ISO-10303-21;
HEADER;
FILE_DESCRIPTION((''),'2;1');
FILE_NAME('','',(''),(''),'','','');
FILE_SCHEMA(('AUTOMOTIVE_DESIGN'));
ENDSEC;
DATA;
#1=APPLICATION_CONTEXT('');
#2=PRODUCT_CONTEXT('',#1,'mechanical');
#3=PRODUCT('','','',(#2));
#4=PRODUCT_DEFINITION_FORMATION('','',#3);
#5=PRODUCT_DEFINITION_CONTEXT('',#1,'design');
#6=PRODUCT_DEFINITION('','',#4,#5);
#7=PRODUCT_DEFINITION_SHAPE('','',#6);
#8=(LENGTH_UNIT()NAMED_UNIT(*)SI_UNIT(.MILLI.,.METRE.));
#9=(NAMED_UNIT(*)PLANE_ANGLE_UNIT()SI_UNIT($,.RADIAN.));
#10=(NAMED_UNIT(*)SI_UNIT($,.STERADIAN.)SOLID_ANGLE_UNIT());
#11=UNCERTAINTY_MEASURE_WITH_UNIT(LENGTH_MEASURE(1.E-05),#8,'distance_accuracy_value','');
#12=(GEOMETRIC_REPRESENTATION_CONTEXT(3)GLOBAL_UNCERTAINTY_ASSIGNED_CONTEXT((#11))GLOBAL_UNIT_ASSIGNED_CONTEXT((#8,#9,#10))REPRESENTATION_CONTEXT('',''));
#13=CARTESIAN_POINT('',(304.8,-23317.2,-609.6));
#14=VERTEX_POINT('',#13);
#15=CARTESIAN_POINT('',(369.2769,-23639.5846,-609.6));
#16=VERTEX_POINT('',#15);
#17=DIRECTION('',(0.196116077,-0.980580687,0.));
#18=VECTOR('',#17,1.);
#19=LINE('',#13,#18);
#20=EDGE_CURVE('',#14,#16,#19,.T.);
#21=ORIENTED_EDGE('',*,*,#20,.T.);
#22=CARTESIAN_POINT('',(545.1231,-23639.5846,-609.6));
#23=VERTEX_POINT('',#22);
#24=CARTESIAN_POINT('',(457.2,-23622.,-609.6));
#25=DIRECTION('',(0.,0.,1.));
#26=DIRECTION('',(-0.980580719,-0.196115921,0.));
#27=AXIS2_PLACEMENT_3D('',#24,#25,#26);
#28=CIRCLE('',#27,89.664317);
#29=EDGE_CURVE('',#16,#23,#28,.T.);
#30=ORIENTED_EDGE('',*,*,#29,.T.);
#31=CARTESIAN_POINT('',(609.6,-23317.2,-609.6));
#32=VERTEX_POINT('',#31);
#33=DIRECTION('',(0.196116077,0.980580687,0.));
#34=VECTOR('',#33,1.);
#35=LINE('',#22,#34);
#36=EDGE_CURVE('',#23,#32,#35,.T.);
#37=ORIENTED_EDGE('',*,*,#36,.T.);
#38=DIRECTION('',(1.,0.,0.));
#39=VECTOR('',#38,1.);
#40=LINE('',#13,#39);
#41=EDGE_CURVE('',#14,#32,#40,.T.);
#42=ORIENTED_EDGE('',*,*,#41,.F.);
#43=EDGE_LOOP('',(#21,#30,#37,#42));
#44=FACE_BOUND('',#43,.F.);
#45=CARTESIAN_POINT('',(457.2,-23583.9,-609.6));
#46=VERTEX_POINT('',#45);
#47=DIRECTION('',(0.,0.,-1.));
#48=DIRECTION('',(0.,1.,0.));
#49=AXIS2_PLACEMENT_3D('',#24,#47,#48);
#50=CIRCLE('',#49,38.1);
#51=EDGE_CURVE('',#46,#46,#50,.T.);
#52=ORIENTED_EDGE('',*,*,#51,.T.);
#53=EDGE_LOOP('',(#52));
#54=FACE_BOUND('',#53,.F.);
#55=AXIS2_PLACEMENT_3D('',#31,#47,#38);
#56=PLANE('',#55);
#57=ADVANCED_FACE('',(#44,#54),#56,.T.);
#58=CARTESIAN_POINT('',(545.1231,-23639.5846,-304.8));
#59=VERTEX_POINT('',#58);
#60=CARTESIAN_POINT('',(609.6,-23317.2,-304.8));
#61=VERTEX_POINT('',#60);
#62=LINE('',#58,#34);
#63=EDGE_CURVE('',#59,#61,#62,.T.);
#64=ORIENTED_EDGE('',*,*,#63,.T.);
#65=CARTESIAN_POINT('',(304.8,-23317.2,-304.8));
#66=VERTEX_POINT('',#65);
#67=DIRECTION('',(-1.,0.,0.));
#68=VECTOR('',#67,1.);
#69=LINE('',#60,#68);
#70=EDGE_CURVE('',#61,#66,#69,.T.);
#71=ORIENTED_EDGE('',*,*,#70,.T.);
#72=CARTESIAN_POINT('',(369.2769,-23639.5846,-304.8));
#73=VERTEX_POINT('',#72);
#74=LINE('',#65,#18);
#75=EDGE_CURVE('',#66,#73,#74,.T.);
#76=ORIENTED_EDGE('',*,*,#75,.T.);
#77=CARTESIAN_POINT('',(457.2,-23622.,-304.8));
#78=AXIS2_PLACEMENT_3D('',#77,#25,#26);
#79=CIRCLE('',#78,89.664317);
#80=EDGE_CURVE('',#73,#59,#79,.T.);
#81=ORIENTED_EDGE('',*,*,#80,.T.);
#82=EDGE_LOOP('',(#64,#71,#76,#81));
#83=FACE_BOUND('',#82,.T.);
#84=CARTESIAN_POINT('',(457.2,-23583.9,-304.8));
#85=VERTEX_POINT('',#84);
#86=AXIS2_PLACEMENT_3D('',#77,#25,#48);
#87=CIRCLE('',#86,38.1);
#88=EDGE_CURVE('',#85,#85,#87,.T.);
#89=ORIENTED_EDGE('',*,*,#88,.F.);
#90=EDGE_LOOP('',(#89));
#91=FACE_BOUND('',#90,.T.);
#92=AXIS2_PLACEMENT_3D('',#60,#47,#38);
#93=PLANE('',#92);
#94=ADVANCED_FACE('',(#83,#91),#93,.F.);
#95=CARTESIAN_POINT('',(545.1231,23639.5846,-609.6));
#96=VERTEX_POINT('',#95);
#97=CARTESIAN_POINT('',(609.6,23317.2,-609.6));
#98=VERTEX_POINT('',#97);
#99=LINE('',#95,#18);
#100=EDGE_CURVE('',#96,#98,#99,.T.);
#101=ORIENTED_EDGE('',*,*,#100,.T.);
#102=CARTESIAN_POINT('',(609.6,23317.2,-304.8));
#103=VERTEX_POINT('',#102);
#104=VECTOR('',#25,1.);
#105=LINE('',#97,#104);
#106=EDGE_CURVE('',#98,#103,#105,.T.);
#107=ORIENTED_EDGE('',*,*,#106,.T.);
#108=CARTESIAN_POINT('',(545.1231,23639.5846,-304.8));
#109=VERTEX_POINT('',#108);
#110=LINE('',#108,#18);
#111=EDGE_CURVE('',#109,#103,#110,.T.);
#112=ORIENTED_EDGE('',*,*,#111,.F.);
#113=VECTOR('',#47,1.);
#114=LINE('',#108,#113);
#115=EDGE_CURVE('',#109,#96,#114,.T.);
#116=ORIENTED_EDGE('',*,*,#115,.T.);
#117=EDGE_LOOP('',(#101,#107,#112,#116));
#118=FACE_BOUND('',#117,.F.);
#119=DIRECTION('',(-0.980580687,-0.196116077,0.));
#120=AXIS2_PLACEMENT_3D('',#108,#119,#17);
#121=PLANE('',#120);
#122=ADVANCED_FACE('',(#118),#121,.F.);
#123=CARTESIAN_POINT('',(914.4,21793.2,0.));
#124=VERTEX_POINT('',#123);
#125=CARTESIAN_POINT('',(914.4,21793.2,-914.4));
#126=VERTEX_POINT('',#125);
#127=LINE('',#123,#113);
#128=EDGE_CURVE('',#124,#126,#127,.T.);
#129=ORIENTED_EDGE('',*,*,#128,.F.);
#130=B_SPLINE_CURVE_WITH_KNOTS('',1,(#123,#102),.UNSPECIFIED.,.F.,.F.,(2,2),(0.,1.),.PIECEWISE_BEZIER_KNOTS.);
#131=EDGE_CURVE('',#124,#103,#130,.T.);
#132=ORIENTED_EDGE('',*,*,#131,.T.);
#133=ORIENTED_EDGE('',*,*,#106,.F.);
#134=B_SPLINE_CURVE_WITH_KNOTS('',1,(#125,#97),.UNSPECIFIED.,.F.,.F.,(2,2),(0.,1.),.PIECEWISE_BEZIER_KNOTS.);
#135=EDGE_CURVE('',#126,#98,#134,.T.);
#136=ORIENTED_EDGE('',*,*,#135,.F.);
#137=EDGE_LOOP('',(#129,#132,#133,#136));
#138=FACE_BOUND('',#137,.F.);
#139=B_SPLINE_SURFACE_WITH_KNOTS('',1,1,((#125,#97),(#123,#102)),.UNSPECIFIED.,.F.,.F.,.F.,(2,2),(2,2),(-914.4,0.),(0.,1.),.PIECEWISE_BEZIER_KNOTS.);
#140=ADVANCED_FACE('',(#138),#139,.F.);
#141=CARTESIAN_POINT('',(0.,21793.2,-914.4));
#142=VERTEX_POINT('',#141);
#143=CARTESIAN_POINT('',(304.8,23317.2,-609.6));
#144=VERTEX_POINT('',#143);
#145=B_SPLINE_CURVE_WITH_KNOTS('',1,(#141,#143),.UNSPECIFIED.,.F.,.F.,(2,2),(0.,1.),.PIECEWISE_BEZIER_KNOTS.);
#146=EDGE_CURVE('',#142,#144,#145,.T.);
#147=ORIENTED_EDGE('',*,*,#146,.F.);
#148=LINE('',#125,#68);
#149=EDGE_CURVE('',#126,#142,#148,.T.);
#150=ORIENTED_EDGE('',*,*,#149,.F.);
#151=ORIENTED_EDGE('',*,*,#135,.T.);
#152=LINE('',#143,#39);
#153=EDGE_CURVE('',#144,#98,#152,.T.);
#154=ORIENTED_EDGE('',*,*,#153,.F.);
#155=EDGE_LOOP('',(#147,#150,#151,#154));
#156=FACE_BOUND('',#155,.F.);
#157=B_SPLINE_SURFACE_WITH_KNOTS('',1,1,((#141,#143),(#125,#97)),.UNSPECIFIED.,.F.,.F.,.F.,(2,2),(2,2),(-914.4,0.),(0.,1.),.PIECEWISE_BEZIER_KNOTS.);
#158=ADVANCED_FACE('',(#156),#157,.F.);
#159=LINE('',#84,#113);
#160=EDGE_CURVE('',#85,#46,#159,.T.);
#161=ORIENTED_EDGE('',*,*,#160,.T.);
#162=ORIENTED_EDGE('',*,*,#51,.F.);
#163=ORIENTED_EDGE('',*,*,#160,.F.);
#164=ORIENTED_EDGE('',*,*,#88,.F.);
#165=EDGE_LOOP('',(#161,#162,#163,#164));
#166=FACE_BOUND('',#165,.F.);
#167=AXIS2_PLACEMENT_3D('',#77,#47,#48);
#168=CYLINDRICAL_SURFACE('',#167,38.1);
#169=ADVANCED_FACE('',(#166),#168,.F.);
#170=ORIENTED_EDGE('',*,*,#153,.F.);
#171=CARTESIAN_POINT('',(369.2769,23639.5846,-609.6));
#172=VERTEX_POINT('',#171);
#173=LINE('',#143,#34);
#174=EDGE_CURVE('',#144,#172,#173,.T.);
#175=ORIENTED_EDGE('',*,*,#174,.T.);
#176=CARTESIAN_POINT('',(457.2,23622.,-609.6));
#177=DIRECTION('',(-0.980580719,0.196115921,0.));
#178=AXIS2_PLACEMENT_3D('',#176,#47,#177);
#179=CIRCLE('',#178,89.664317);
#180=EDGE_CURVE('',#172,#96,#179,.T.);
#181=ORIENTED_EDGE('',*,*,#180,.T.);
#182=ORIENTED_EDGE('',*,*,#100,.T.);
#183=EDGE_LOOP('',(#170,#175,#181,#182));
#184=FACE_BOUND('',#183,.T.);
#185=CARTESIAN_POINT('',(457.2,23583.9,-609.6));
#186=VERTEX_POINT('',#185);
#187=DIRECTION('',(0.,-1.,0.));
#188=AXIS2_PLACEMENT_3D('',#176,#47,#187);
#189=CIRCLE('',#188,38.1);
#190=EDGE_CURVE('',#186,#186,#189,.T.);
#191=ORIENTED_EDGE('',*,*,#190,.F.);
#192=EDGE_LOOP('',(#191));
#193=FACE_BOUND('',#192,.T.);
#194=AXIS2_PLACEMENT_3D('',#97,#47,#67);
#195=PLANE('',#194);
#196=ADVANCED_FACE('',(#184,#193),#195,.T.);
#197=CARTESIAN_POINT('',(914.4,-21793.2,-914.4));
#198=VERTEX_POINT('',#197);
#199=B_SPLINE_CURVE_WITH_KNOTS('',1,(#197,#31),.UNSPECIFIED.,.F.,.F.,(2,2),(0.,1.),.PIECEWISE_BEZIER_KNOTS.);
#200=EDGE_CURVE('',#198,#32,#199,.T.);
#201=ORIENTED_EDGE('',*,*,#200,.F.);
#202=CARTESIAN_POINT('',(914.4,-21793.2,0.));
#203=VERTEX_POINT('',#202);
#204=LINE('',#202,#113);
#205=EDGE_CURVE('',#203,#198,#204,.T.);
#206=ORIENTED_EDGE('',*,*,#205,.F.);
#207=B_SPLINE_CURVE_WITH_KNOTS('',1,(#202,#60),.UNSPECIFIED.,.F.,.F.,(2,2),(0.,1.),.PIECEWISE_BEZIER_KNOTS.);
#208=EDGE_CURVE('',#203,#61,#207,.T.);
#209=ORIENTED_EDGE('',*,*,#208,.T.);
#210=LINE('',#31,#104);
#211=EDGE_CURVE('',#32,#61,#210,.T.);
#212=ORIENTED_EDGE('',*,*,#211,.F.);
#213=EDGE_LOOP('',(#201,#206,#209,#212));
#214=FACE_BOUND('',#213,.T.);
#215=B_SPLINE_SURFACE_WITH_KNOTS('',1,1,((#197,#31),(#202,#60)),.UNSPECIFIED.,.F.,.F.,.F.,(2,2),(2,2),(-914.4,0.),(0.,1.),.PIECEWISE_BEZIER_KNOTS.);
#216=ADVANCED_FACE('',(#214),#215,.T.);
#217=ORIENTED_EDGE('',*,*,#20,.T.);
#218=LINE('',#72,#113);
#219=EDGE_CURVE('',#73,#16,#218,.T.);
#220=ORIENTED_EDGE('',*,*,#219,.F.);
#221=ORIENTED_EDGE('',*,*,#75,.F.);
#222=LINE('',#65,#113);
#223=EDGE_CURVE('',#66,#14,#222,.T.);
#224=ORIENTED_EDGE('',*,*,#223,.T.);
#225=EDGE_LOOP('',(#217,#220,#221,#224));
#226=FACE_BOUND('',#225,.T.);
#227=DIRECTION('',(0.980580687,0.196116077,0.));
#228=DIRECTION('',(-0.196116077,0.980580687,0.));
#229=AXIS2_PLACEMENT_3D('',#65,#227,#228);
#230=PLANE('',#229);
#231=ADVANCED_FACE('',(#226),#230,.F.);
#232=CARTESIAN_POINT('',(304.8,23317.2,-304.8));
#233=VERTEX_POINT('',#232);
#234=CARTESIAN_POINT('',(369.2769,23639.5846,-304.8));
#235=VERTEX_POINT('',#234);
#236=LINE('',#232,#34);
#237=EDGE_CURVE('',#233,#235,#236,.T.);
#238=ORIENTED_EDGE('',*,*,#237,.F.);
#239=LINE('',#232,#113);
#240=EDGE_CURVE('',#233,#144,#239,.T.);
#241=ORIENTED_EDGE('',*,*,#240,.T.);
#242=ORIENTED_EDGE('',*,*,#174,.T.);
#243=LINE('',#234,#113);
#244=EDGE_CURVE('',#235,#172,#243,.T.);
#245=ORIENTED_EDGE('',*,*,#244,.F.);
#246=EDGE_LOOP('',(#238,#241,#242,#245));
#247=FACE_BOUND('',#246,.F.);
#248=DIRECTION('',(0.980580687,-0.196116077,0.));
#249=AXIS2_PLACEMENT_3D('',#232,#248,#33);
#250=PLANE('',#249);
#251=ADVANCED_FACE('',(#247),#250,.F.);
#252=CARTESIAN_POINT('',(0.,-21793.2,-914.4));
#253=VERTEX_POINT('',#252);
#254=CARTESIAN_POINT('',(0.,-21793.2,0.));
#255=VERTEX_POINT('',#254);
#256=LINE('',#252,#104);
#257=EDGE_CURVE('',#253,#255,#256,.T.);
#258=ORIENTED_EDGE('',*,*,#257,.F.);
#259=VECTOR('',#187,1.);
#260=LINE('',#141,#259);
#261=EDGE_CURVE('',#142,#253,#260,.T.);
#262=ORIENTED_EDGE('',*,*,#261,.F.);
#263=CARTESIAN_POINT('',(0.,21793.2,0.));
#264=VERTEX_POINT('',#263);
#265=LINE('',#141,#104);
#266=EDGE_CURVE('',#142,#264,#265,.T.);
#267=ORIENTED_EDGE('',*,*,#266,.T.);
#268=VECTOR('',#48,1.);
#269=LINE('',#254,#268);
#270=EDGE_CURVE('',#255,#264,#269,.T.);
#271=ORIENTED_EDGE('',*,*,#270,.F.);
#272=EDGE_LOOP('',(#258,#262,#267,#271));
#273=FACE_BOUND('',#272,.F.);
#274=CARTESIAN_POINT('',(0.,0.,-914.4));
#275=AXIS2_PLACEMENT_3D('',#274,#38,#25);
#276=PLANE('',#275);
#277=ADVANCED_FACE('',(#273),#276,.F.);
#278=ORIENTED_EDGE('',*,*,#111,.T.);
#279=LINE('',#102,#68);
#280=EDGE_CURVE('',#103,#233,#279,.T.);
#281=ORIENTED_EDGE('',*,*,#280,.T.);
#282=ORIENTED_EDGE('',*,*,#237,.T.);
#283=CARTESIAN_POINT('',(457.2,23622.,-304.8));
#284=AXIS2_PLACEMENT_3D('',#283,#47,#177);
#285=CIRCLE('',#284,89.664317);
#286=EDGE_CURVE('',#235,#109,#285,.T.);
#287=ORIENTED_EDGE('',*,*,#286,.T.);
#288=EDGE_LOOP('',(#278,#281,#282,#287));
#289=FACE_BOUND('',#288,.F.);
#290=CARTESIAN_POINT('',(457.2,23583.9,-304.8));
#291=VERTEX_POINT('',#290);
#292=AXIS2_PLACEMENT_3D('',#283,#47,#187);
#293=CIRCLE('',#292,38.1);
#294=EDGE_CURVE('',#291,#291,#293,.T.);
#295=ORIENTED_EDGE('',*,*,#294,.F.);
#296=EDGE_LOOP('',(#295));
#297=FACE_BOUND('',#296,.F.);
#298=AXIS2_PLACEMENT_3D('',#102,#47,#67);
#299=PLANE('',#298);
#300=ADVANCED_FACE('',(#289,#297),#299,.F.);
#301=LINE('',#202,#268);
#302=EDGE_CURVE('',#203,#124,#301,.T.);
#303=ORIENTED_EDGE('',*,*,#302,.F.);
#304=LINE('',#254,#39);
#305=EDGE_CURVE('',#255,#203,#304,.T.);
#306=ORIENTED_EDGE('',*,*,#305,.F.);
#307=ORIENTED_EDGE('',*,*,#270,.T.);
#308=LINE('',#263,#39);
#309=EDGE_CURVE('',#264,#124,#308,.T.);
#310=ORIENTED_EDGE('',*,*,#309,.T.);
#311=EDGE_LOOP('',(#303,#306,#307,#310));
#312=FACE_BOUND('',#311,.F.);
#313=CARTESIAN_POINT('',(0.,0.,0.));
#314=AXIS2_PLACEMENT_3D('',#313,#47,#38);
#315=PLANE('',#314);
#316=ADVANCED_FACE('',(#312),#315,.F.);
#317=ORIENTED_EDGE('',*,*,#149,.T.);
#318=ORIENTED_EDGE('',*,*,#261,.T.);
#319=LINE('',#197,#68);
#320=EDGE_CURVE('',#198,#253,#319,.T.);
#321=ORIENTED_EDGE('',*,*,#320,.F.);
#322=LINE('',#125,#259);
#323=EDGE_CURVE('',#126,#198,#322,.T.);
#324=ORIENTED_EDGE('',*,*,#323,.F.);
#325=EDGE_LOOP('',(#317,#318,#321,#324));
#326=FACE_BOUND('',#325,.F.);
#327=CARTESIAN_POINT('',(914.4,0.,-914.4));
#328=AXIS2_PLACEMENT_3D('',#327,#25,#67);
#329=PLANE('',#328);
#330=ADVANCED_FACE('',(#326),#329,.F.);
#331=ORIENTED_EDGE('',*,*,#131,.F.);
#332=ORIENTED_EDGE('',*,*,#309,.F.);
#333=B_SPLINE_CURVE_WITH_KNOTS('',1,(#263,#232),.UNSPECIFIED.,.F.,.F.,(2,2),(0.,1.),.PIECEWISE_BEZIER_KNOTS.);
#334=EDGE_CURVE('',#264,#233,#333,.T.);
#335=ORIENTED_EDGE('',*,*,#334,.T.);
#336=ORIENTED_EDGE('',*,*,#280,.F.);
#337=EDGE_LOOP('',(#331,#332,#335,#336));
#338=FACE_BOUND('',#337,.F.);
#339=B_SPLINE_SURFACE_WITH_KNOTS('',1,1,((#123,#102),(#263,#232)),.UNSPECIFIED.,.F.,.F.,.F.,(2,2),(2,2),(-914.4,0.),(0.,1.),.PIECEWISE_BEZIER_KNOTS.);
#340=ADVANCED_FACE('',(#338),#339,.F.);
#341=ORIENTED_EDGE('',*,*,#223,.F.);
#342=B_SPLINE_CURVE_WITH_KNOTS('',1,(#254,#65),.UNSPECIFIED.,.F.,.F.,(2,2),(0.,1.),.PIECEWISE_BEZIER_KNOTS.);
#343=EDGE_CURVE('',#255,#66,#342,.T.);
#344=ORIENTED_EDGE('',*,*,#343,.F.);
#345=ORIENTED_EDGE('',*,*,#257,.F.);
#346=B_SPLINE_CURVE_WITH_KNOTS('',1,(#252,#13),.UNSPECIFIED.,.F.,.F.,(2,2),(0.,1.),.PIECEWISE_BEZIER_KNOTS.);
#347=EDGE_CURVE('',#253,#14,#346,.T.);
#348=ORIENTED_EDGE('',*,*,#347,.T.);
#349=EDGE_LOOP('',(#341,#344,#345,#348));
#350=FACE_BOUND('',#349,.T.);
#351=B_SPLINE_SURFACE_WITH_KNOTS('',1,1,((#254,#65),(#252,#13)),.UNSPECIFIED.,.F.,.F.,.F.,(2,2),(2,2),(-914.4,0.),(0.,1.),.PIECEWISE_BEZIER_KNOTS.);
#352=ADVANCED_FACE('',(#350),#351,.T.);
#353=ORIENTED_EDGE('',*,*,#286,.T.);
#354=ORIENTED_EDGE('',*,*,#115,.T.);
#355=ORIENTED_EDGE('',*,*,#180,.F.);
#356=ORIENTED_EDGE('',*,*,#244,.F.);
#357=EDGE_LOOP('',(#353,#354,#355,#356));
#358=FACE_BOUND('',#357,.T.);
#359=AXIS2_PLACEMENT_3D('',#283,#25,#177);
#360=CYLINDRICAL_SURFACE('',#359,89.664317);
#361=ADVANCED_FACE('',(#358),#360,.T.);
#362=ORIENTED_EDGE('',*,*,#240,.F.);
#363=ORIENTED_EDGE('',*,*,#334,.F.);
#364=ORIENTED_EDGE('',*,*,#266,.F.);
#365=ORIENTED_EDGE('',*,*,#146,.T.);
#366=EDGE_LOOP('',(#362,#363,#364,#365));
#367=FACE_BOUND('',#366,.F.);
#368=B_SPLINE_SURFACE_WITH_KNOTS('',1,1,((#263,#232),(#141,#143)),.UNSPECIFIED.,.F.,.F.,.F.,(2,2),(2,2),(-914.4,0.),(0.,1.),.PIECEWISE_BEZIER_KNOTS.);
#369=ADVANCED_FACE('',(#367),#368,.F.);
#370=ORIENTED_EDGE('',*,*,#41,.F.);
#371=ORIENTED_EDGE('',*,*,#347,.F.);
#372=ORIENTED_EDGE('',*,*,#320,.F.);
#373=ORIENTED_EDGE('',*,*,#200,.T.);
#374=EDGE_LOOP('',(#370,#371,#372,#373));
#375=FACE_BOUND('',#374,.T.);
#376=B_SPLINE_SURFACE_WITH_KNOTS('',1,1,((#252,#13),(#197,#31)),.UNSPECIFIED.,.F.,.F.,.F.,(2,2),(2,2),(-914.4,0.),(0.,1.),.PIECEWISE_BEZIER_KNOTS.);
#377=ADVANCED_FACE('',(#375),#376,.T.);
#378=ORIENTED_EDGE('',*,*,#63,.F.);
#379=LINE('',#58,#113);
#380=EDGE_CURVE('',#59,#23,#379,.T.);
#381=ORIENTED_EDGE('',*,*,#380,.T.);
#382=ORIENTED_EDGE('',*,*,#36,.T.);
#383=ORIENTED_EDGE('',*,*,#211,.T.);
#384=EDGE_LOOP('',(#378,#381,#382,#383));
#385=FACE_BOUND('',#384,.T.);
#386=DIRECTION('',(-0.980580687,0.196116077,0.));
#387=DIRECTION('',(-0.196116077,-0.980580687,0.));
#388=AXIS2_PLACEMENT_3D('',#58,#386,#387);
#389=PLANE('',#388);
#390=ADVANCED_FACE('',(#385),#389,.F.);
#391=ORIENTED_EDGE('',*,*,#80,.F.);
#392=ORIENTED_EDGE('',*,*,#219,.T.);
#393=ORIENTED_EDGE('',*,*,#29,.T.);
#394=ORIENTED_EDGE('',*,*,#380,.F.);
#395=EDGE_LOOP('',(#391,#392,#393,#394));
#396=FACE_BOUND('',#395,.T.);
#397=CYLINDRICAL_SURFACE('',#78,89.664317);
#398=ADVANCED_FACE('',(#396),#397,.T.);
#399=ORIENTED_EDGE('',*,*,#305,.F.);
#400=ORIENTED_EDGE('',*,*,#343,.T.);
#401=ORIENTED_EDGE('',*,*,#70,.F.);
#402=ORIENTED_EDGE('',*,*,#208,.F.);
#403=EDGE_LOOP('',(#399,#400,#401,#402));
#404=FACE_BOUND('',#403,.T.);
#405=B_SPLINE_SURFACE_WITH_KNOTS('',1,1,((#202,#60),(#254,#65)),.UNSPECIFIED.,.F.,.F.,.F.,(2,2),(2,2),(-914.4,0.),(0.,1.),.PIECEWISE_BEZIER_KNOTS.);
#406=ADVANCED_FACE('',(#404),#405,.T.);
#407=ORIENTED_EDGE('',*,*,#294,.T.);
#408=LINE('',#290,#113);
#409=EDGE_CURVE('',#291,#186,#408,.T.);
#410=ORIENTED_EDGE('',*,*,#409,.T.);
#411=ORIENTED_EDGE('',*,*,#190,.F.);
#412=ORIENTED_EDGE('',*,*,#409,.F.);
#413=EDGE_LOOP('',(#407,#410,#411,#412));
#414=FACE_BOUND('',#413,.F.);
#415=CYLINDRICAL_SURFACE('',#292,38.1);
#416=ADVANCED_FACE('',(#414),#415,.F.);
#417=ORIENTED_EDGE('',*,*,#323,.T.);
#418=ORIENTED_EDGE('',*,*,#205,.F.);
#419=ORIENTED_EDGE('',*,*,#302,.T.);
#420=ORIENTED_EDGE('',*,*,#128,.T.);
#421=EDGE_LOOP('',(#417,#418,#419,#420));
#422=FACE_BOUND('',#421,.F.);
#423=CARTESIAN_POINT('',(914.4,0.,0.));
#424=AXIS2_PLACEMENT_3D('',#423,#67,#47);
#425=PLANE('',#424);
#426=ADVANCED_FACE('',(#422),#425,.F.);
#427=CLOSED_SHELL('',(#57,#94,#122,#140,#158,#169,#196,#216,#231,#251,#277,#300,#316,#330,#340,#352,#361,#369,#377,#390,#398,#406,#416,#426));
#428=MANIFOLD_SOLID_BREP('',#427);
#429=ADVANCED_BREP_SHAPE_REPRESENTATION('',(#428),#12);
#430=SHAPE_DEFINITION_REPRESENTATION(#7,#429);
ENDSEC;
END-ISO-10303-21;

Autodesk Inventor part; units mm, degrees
ref_plane "YZ Plane" through (0, 0, 0) normal (1, 0, 0) x (0, 1, 0)
sketch "Sketch5" plane through (0, 0, 0) normal (0, 1, 0) x (-1, 0, 0)
  line L0 (0, 0) -> (-914.4, 0)
  line L1 (-914.4, 0) -> (-914.4, -914.4)
  line L2 (-914.4, -914.4) -> (0, -914.4)
  line L3 (0, -914.4) -> (0, 0)
  dimension "d26" = 914.4
  dimension "d27" = 914.4
extrude "Extrusion3" add sketch "Sketch5" along normal mid plane 43586.4
ref_plane "Work Plane4" through (0, 23317.2, 0) normal (0, 1, 0) x (1, 0, 0)
sketch "Sketch6" plane through (0, 23317.2, 0) normal (0, 1, 0) x (1, 0, 0)
  line L0 (609.6, 304.8) -> (304.8, 304.8)
  line L1 (304.8, 304.8) -> (304.8, 609.6)
  line L2 (304.8, 609.6) -> (609.6, 609.6)
  line L3 (609.6, 609.6) -> (609.6, 304.8)
  line L4 (914.4, 914.4) -> (0, 914.4) projected
  line L5 (914.4, 0) -> (914.4, 914.4) projected
  point P0 (0, 0)
  dimension "d31" = 304.8
  dimension "d32" = 304.8
  dimension "d33" = 304.8
  dimension "d34" = 304.8
loft "Loft3" add profiles "Sketch6" section 1 edges at (457.2, 21793.2, 0) (914.4, 21793.2, -457.2) (457.2, 21793.2, -914.4) (0, 21793.2, -457.2)
ref_plane "Work Plane5" through (609.6, 23317.2, -304.8) normal (0, 0, -1) x (-1, 0, 0)
sketch "Sketch7" plane through (609.6, 23317.2, -304.8) normal (0, 0, -1) x (-1, 0, 0)
  line L0 (609.6, -1524) -> (304.8, 0) projected
  line L1 (0, 0) -> (304.8, 0) projected
  line L2 (-304.8, -1524) -> (0, 0) projected
  line L3 (304.8, 0) -> (0, 0) projected
  line L4 (304.8, 0) -> (240.3231, 322.3846)
  arc A0 (240.3231, 322.3846) -> (64.4769, 322.3846) centre (152.4, 304.8) ccw
  line L5 (-304.8, -1524) -> (0, 0) projected
  line L6 (64.4769, 322.3846) -> (0, 0)
  point P0 (609.6, -23317.2)
  dimension "d40" = 304.8
extrude "Extrusion4" add sketch "Sketch7" along normal up to surface (304.8 mm away)
hole "Hole1" at (457.2, 23622, -304.8) direction (0, 0, -1) diameter 76.2 end through all
mirror "Mirror1" about plane through (0, 0, 0) normal (0, 1, 0) of "Loft3", "Extrusion4", "Hole1"
ref_plane "Work Plane6" through (0, -23317.2, 0) normal (0, 1, 0) x (1, 0, 0)
ref_plane "Work Plane7" through (609.6, -23317.2, -304.8) normal (0, 0, 1) x (-1, 0, 0)
properties part number "MM Support B" material "Iron, Malleable"
